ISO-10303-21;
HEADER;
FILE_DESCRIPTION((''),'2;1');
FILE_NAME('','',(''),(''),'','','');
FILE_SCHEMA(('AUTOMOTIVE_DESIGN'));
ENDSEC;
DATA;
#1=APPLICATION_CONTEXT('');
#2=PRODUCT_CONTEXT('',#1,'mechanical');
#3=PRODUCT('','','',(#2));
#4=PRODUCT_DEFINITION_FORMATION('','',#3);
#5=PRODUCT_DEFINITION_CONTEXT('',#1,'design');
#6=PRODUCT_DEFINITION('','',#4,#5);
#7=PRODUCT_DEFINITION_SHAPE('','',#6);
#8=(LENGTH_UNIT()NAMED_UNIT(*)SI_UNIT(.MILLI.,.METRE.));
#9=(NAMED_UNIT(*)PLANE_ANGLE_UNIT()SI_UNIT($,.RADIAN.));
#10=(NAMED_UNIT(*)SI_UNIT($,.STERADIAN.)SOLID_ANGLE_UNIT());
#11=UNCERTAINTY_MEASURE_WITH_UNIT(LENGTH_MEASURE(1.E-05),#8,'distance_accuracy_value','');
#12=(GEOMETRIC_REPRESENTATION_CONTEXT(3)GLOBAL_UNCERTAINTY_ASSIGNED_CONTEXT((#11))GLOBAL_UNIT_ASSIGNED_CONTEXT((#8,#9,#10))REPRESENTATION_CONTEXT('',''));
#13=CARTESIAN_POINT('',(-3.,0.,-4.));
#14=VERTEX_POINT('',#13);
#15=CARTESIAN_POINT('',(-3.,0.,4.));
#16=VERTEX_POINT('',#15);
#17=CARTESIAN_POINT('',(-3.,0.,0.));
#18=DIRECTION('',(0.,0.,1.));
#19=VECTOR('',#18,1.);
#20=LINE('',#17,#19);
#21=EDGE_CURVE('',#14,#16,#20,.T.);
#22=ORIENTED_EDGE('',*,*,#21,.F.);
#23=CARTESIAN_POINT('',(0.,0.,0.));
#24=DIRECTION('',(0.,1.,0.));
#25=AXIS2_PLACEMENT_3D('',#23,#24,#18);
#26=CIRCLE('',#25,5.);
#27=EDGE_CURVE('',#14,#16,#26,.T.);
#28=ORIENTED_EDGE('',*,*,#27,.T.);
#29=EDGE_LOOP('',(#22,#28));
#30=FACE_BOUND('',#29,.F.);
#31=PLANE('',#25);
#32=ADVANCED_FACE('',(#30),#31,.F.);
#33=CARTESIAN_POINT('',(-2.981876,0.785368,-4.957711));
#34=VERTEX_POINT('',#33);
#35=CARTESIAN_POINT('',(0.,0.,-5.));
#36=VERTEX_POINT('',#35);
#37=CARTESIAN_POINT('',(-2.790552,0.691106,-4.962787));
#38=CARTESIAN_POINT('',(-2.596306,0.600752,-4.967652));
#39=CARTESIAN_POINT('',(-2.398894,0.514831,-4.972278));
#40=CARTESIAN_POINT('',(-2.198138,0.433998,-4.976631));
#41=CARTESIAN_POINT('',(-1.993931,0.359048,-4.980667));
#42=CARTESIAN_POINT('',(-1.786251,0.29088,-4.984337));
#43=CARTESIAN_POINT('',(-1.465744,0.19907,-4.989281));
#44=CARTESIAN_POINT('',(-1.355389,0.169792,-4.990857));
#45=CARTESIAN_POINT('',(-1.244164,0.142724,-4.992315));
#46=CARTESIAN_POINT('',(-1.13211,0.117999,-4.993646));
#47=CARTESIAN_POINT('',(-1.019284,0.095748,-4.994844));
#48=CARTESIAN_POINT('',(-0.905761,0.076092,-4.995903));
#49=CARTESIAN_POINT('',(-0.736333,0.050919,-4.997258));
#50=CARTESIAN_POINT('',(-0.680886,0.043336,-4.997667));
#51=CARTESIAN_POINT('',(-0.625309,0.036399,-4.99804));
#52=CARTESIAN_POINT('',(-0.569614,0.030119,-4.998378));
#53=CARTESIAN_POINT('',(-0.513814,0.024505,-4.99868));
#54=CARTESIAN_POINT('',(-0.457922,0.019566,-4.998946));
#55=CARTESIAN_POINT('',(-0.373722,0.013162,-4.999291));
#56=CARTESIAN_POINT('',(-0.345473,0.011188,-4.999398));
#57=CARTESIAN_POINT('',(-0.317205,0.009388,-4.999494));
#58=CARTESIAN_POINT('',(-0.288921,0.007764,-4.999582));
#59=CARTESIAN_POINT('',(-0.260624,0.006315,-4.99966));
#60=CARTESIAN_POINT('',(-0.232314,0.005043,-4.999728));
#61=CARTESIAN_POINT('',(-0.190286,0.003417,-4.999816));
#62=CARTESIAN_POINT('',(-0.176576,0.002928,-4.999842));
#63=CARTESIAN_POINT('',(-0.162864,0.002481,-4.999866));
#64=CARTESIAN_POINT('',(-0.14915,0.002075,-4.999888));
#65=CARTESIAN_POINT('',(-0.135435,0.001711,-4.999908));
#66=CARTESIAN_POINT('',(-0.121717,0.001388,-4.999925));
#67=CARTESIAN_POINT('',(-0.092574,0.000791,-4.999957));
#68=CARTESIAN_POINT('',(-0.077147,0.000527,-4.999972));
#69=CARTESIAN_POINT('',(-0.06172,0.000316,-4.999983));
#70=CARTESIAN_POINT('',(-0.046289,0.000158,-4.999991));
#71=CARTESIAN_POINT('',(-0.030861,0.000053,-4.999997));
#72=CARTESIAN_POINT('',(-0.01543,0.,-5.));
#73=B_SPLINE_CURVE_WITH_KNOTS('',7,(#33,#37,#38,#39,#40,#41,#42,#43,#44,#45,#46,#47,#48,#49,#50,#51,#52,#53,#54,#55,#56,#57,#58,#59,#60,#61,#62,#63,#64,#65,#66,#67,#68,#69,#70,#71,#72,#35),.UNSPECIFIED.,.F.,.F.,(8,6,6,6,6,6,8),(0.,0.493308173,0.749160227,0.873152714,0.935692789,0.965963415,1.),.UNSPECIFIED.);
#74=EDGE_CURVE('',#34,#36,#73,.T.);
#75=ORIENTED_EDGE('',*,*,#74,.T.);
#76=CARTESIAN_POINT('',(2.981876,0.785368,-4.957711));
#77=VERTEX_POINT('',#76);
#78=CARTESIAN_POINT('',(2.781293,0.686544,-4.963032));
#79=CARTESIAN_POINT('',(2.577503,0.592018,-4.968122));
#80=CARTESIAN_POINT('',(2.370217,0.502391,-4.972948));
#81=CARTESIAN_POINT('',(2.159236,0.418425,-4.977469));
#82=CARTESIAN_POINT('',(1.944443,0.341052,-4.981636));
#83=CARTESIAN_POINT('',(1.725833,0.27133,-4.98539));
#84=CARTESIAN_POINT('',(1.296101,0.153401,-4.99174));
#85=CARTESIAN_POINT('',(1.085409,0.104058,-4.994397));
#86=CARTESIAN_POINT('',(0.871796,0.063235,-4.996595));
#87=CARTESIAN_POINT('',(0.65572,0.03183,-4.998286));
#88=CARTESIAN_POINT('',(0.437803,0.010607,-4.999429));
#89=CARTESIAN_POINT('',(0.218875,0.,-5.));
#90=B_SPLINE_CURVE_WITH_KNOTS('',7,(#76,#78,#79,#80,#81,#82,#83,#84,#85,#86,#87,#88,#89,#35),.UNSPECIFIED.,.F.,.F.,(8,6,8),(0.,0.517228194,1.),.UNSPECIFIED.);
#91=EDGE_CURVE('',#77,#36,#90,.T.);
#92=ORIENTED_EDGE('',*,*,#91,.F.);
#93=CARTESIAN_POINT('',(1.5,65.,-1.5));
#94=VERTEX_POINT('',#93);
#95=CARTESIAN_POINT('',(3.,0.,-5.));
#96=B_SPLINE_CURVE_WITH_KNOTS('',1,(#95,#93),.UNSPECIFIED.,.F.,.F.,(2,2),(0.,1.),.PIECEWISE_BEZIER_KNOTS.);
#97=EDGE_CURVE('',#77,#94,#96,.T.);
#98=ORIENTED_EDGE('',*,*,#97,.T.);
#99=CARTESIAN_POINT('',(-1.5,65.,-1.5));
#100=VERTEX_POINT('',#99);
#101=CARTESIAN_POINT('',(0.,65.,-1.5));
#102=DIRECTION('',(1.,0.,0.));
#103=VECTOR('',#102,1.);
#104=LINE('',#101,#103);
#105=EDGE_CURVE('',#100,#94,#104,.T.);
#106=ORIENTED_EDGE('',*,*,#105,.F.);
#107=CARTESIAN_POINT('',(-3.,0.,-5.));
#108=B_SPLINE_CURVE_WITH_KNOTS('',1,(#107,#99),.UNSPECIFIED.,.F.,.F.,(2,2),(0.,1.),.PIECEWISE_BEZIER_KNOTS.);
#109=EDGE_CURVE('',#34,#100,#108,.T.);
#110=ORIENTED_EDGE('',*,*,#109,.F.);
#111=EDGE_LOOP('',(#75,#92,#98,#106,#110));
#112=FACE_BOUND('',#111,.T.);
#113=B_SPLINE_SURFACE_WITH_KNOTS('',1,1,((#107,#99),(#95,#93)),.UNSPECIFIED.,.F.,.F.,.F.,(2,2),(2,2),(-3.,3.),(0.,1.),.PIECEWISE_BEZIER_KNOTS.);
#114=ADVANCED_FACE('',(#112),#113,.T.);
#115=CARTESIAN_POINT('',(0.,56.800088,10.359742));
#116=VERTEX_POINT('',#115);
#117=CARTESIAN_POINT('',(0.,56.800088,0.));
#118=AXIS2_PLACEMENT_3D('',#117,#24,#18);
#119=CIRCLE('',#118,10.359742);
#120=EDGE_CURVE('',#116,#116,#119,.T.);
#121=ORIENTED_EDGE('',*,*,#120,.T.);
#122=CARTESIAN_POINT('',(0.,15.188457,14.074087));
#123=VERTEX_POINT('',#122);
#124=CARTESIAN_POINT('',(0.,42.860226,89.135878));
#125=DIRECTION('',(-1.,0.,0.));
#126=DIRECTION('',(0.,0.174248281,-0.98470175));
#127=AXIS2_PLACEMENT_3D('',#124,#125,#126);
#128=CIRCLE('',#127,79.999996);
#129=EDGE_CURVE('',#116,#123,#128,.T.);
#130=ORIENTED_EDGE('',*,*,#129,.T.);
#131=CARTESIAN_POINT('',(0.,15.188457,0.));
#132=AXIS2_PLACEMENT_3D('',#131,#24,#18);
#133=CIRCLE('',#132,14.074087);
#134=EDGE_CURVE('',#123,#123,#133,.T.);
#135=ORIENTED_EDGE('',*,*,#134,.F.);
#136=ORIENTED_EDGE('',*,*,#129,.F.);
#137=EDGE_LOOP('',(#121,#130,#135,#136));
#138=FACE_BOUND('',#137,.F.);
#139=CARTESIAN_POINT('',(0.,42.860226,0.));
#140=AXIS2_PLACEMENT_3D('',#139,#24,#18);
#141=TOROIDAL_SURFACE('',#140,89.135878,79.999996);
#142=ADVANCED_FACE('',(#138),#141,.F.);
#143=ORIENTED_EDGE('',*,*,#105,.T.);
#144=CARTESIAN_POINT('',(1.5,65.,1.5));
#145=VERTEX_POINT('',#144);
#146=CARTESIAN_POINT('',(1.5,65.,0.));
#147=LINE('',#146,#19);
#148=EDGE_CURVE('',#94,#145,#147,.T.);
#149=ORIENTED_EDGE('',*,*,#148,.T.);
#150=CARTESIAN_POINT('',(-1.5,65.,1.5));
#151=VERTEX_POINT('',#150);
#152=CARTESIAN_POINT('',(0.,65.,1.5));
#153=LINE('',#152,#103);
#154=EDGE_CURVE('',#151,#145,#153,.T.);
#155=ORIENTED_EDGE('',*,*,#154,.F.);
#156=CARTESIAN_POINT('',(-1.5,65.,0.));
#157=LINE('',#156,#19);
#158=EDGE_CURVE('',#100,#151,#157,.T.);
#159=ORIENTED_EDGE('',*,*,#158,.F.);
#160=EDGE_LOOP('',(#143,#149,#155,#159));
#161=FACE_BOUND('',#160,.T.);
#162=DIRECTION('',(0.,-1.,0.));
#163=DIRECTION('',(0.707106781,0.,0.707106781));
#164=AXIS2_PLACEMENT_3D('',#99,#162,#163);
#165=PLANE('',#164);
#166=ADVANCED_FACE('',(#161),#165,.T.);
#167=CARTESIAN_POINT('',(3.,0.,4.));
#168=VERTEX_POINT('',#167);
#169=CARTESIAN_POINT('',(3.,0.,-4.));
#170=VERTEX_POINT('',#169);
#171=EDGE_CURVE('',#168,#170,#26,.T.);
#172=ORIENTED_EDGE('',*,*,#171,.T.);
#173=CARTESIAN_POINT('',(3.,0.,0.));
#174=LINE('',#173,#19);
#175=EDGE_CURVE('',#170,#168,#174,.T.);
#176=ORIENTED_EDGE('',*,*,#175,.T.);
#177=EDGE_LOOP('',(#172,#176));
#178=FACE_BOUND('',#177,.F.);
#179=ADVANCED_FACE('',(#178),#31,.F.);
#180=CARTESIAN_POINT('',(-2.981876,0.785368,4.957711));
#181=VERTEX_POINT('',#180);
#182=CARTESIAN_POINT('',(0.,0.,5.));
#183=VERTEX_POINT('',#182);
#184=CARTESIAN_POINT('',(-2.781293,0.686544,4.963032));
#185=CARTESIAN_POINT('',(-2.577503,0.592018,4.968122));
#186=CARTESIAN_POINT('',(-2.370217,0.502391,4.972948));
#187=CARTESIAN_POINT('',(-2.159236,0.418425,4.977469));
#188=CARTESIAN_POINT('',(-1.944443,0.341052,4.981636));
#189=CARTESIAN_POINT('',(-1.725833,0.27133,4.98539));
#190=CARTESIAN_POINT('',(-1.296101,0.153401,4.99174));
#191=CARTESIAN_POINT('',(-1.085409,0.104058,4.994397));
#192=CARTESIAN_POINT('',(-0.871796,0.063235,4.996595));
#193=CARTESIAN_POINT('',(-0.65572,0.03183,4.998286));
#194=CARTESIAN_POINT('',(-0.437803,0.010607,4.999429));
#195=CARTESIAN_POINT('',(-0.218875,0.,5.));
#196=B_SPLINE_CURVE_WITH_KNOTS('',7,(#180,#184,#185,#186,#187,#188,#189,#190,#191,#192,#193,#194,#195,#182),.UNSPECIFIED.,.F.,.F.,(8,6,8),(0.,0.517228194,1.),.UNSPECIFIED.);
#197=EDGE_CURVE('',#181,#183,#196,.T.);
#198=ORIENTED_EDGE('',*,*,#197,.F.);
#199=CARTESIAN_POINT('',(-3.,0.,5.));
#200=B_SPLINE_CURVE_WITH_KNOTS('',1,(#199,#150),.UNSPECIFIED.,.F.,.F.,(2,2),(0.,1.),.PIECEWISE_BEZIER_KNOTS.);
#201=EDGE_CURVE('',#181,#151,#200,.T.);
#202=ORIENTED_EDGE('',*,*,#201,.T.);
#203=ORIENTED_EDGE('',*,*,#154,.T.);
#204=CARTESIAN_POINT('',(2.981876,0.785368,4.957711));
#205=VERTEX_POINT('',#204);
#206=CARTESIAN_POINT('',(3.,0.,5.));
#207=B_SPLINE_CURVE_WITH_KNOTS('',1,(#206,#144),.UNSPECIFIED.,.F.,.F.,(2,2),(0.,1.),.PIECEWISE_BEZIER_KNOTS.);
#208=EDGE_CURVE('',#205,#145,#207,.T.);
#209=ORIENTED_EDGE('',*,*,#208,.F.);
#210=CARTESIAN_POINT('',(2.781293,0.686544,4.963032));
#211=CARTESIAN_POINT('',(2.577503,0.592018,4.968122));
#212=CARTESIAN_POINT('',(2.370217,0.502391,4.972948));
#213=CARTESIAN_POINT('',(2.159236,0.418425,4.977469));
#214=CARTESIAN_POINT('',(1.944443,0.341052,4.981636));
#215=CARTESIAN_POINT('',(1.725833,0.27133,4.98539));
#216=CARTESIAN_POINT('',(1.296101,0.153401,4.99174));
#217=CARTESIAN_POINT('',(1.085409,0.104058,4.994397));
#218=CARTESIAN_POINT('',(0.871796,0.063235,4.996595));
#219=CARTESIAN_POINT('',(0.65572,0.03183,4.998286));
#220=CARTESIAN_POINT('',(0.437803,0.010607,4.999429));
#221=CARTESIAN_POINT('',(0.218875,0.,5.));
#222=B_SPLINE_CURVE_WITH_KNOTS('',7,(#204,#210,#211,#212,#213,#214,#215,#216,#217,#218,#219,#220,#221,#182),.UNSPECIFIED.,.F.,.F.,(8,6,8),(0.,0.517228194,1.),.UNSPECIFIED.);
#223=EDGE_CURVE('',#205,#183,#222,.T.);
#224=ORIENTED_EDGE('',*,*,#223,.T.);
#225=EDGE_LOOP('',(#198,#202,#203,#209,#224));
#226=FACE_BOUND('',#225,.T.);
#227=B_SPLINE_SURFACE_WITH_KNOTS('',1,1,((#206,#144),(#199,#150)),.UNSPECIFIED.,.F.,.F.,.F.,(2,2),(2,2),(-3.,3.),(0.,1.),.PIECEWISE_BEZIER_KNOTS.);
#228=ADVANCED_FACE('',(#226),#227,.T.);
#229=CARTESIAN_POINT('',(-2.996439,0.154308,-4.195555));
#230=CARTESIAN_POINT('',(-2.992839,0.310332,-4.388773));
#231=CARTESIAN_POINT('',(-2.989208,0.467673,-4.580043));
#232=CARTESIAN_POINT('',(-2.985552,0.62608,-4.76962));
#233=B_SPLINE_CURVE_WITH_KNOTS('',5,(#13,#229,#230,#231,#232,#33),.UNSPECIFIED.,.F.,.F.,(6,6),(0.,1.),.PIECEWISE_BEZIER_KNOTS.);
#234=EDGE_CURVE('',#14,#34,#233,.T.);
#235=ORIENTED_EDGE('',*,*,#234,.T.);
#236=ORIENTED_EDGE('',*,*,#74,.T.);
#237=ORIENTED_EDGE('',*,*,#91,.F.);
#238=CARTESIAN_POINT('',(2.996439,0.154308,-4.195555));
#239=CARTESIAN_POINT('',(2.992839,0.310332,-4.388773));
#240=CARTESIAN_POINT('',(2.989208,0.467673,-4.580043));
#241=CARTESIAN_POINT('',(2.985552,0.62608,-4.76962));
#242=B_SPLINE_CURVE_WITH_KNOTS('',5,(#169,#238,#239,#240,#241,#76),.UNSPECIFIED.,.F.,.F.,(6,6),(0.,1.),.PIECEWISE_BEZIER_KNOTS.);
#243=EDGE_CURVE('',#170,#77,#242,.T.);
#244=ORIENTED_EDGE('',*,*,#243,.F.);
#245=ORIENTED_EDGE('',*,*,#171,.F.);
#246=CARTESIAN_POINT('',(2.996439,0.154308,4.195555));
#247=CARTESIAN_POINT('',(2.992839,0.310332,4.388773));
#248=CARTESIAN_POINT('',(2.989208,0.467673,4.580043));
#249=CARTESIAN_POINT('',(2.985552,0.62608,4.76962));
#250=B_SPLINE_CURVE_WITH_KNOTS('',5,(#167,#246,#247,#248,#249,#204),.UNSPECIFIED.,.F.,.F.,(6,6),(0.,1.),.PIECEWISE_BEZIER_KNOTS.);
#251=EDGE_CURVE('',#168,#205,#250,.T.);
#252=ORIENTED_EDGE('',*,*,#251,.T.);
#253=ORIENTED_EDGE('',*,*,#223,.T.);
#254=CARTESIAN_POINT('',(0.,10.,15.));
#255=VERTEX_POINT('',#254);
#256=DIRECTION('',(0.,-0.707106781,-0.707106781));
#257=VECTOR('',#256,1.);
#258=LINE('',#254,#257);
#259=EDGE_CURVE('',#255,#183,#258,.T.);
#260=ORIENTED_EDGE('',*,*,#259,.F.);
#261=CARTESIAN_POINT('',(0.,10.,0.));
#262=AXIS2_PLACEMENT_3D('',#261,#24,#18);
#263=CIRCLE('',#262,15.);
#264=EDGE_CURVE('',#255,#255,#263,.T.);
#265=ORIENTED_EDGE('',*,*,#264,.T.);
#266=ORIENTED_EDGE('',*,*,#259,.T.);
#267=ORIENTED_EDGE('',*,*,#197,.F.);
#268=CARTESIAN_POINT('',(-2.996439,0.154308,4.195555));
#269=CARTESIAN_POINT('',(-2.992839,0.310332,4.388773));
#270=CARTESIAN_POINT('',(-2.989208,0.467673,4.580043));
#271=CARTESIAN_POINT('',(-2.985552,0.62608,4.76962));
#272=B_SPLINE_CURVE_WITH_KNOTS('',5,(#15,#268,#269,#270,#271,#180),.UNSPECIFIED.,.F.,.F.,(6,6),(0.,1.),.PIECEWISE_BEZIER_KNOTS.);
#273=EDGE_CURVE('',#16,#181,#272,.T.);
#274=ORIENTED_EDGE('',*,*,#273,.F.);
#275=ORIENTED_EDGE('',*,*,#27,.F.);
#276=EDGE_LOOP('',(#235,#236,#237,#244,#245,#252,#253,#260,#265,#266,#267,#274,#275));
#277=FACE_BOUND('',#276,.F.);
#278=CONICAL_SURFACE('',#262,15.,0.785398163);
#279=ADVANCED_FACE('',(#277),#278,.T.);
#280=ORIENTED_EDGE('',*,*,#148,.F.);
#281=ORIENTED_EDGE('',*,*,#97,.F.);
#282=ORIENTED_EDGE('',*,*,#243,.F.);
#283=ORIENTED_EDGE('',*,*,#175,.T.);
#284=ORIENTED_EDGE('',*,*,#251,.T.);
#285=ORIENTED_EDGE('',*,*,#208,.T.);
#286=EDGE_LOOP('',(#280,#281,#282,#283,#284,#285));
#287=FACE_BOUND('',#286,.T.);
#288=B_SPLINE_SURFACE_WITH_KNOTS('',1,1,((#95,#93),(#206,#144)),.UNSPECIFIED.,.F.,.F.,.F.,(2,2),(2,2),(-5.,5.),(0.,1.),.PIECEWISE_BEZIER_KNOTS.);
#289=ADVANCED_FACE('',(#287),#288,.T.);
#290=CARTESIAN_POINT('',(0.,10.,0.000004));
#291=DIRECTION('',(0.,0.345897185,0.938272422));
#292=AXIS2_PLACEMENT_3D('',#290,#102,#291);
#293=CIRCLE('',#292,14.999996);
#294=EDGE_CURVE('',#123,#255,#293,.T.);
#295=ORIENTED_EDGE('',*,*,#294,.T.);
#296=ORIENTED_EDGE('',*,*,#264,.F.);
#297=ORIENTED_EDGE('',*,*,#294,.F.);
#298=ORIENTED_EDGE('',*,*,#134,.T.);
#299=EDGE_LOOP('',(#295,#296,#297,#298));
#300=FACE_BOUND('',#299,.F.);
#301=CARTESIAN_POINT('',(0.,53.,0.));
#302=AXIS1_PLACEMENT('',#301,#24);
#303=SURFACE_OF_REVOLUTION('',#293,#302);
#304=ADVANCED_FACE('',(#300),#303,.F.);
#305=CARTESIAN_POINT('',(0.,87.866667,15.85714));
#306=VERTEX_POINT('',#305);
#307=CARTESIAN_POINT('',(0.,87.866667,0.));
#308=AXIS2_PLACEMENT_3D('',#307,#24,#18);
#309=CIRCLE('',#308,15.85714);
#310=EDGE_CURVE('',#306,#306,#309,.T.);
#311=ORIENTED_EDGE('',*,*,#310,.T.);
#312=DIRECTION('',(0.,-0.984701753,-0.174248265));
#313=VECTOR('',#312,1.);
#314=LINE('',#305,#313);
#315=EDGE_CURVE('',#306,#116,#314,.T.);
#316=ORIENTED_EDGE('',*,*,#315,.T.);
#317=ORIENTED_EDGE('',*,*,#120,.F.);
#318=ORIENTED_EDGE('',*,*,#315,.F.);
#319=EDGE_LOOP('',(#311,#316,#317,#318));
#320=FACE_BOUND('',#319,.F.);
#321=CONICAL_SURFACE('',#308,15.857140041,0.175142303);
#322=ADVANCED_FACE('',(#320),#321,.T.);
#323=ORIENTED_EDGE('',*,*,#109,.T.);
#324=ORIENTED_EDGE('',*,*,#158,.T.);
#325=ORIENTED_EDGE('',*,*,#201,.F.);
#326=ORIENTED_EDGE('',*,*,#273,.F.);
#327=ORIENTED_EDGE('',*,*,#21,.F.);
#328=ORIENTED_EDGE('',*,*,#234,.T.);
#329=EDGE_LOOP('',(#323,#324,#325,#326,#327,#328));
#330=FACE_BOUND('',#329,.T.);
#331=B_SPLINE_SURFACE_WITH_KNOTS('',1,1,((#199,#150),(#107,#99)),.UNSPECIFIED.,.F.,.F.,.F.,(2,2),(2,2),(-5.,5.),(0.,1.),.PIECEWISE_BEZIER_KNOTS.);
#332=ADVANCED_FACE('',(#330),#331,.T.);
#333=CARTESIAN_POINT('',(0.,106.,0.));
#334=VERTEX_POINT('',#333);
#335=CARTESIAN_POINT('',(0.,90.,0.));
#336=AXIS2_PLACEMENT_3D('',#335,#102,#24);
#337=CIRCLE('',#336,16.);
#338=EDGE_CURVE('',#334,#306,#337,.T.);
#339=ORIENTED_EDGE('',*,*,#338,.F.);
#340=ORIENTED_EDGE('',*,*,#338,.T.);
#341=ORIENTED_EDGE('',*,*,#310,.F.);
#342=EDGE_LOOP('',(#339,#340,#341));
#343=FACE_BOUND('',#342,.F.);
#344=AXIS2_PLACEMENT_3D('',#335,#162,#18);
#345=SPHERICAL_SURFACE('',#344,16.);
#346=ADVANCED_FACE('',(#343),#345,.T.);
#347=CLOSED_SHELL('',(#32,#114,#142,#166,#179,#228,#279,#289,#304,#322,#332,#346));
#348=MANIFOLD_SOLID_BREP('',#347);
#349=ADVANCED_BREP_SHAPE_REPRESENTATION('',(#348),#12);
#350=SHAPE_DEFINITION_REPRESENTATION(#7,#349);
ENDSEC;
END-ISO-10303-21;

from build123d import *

# Parameters (mm, degrees)
F0_W = 6
F0_H = 10
F2_W = 3
F2_H = 3


# Not quite as in the source:
# - ends of sketch curves that miss each other by under 0.0002 mm in the source are joined


with BuildPart() as f3:
    # F0 (on Front) → F3 section 0
    with BuildSketch(Plane.XZ):
        Rectangle(F0_W, F0_H)
    # F2 (on offset) → F3 section 1
    with BuildSketch(Plane.XZ.offset(-65)):
        Rectangle(F2_W, F2_H)
    loft()


with BuildPart() as f5:
    # F4 (on Right) → F5 (revolve)
    with BuildSketch(Plane.YZ):
        with BuildLine():
            Line((10, 15), (0, 5))
            Line((0, 5), (0, 0))
            Line((0, 0), (106, 0))
            ThreePointArc((106, 0), (100.5324895422, 12.0443623345), (87.8666669945, 15.8571400412))
            Line((87.8666669945, 15.8571400412), (56.800088, 10.359742))
            ThreePointArc((56.800088, 10.359742), (35.7475326189, 9.4526994667), (15.1884568347, 14.0740865517))
            ThreePointArc((15.1884568347, 14.0740865517), (12.6352134757, 14.7667074847), (10, 15))
        make_face()
    revolve(axis=Axis((0, 53, 0), (0, 1, 0)))

    # F6: cut F3
    add(f3.part, mode=Mode.SUBTRACT)


solid = f5.part
